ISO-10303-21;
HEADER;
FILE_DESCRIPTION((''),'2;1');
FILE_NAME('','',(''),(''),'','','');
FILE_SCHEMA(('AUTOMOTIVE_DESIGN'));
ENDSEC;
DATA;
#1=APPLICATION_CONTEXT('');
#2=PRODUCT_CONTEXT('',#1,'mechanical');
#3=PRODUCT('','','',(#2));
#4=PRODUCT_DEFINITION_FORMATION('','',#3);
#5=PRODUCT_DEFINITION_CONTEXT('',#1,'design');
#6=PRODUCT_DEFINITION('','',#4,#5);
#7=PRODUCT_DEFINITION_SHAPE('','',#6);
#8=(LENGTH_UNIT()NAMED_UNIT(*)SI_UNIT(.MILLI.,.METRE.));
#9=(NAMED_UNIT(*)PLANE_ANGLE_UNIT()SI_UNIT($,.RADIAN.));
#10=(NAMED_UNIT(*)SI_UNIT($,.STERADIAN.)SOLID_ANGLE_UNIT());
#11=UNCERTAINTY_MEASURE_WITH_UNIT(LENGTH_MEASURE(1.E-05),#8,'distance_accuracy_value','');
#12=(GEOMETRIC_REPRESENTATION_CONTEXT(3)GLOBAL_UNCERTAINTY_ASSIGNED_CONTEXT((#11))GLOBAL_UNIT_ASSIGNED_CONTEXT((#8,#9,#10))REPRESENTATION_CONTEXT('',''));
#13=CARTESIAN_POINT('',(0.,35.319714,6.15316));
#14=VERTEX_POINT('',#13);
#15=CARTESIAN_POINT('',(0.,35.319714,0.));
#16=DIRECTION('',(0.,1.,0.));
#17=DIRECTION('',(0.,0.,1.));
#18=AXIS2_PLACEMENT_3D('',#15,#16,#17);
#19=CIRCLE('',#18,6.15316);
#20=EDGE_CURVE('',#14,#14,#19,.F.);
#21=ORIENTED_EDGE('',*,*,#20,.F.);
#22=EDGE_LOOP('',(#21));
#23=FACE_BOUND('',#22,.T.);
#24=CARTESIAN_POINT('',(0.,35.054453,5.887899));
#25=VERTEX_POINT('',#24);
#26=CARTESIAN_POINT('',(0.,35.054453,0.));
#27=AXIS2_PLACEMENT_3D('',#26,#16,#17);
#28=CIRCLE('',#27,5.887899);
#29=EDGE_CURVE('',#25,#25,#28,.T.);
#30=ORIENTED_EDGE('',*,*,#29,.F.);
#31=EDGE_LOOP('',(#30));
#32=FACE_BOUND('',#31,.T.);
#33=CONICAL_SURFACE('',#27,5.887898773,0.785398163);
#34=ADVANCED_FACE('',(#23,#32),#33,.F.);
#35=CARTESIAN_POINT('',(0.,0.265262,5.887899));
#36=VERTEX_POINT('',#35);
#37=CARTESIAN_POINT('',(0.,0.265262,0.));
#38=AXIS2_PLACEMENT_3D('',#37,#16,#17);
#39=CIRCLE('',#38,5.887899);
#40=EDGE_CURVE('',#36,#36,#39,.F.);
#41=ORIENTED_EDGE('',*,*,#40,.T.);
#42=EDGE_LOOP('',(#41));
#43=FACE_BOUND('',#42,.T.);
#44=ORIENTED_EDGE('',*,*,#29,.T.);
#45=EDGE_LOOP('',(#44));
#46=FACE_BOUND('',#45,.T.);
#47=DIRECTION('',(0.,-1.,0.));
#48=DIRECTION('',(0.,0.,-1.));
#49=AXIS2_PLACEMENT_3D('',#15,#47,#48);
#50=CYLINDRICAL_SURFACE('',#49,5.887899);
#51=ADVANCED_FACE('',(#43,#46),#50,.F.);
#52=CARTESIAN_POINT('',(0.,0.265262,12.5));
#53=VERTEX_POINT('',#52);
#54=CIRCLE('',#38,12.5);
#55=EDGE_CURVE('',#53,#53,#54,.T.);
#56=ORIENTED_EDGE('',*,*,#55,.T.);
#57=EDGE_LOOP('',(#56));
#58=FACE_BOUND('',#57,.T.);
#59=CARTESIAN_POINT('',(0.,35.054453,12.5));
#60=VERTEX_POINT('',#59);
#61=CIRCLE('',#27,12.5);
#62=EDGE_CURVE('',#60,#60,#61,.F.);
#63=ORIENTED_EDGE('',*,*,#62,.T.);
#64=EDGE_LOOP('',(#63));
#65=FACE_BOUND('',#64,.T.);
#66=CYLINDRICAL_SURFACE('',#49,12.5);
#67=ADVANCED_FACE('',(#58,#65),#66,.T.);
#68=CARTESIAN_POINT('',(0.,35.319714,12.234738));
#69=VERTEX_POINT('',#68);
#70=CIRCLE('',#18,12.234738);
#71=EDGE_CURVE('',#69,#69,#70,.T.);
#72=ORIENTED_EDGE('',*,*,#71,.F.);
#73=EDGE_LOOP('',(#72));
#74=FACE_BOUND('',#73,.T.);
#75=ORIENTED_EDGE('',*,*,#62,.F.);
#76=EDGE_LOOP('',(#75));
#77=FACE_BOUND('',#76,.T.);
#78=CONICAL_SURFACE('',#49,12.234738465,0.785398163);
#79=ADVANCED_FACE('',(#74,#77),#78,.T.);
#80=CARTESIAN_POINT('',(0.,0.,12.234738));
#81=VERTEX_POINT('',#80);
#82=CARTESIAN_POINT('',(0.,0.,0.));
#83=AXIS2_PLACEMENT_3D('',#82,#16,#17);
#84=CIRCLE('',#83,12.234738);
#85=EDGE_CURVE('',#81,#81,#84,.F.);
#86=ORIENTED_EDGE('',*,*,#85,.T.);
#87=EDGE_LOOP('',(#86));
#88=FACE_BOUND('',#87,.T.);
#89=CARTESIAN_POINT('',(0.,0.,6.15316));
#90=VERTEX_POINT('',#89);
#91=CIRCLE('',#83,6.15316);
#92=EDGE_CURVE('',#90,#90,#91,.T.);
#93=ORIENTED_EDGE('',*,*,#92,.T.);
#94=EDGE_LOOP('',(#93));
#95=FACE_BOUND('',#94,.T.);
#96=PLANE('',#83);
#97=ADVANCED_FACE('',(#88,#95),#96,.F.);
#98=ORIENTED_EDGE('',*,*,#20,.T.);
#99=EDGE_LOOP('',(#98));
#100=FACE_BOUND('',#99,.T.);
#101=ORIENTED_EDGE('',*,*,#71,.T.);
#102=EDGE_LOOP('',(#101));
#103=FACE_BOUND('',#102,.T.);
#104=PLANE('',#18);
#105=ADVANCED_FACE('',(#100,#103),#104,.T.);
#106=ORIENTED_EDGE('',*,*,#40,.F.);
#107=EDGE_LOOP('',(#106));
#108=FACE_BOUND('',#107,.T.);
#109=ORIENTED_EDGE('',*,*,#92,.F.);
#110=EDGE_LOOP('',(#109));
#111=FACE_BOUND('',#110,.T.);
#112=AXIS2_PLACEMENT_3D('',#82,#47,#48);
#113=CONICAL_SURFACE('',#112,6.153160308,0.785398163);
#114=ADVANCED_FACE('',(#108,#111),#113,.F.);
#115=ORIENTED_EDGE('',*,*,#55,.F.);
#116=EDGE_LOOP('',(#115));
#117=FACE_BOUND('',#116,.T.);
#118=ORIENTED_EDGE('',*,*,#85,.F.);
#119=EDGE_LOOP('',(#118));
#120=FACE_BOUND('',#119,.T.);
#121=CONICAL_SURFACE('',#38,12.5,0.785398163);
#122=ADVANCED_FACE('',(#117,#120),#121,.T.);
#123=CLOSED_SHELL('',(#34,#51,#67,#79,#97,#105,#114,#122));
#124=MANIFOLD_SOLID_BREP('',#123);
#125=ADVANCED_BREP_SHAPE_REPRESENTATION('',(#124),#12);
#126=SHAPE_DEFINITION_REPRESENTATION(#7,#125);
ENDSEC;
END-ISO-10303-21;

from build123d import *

# Parameters (mm, degrees)
SKETCH1_R           = 12.5
BOSS_EXTRUDE1_DEPTH = 35.319714223
SKETCH2_R           = 5.887898773
CUT_EXTRUDE1_DEPTH  = 40.496610143
CHAMFER1_SIZE       = 0.265261535


with BuildPart() as part:
    # Sketch1 → Boss-Extrude1 (new body)
    with BuildSketch(Plane(origin=(0, 0, 0), x_dir=(1, 0, 0), z_dir=(0, 1, 0))):
        Circle(SKETCH1_R)
    extrude(amount=BOSS_EXTRUDE1_DEPTH)

    # Sketch2 → Cut-Extrude1 (cut, through all)
    with BuildSketch(Plane(origin=(0, 0, 0), x_dir=(1, 0, 0), z_dir=(0, 1, 0))):
        Circle(SKETCH2_R)
    extrude(amount=CUT_EXTRUDE1_DEPTH, mode=Mode.SUBTRACT)

    # Chamfer1
    chamfer1_edges = [part.edges().sort_by_distance(p)[0] for p in [
        (-5.887898773, 35.319714223, 0),
        (-5.887898773, 0, 0),
        (-12.5, 0, 0),
        (-12.5, 35.319714223, 0),
    ]]
    chamfer(chamfer1_edges, length=CHAMFER1_SIZE)


solid = part.part
